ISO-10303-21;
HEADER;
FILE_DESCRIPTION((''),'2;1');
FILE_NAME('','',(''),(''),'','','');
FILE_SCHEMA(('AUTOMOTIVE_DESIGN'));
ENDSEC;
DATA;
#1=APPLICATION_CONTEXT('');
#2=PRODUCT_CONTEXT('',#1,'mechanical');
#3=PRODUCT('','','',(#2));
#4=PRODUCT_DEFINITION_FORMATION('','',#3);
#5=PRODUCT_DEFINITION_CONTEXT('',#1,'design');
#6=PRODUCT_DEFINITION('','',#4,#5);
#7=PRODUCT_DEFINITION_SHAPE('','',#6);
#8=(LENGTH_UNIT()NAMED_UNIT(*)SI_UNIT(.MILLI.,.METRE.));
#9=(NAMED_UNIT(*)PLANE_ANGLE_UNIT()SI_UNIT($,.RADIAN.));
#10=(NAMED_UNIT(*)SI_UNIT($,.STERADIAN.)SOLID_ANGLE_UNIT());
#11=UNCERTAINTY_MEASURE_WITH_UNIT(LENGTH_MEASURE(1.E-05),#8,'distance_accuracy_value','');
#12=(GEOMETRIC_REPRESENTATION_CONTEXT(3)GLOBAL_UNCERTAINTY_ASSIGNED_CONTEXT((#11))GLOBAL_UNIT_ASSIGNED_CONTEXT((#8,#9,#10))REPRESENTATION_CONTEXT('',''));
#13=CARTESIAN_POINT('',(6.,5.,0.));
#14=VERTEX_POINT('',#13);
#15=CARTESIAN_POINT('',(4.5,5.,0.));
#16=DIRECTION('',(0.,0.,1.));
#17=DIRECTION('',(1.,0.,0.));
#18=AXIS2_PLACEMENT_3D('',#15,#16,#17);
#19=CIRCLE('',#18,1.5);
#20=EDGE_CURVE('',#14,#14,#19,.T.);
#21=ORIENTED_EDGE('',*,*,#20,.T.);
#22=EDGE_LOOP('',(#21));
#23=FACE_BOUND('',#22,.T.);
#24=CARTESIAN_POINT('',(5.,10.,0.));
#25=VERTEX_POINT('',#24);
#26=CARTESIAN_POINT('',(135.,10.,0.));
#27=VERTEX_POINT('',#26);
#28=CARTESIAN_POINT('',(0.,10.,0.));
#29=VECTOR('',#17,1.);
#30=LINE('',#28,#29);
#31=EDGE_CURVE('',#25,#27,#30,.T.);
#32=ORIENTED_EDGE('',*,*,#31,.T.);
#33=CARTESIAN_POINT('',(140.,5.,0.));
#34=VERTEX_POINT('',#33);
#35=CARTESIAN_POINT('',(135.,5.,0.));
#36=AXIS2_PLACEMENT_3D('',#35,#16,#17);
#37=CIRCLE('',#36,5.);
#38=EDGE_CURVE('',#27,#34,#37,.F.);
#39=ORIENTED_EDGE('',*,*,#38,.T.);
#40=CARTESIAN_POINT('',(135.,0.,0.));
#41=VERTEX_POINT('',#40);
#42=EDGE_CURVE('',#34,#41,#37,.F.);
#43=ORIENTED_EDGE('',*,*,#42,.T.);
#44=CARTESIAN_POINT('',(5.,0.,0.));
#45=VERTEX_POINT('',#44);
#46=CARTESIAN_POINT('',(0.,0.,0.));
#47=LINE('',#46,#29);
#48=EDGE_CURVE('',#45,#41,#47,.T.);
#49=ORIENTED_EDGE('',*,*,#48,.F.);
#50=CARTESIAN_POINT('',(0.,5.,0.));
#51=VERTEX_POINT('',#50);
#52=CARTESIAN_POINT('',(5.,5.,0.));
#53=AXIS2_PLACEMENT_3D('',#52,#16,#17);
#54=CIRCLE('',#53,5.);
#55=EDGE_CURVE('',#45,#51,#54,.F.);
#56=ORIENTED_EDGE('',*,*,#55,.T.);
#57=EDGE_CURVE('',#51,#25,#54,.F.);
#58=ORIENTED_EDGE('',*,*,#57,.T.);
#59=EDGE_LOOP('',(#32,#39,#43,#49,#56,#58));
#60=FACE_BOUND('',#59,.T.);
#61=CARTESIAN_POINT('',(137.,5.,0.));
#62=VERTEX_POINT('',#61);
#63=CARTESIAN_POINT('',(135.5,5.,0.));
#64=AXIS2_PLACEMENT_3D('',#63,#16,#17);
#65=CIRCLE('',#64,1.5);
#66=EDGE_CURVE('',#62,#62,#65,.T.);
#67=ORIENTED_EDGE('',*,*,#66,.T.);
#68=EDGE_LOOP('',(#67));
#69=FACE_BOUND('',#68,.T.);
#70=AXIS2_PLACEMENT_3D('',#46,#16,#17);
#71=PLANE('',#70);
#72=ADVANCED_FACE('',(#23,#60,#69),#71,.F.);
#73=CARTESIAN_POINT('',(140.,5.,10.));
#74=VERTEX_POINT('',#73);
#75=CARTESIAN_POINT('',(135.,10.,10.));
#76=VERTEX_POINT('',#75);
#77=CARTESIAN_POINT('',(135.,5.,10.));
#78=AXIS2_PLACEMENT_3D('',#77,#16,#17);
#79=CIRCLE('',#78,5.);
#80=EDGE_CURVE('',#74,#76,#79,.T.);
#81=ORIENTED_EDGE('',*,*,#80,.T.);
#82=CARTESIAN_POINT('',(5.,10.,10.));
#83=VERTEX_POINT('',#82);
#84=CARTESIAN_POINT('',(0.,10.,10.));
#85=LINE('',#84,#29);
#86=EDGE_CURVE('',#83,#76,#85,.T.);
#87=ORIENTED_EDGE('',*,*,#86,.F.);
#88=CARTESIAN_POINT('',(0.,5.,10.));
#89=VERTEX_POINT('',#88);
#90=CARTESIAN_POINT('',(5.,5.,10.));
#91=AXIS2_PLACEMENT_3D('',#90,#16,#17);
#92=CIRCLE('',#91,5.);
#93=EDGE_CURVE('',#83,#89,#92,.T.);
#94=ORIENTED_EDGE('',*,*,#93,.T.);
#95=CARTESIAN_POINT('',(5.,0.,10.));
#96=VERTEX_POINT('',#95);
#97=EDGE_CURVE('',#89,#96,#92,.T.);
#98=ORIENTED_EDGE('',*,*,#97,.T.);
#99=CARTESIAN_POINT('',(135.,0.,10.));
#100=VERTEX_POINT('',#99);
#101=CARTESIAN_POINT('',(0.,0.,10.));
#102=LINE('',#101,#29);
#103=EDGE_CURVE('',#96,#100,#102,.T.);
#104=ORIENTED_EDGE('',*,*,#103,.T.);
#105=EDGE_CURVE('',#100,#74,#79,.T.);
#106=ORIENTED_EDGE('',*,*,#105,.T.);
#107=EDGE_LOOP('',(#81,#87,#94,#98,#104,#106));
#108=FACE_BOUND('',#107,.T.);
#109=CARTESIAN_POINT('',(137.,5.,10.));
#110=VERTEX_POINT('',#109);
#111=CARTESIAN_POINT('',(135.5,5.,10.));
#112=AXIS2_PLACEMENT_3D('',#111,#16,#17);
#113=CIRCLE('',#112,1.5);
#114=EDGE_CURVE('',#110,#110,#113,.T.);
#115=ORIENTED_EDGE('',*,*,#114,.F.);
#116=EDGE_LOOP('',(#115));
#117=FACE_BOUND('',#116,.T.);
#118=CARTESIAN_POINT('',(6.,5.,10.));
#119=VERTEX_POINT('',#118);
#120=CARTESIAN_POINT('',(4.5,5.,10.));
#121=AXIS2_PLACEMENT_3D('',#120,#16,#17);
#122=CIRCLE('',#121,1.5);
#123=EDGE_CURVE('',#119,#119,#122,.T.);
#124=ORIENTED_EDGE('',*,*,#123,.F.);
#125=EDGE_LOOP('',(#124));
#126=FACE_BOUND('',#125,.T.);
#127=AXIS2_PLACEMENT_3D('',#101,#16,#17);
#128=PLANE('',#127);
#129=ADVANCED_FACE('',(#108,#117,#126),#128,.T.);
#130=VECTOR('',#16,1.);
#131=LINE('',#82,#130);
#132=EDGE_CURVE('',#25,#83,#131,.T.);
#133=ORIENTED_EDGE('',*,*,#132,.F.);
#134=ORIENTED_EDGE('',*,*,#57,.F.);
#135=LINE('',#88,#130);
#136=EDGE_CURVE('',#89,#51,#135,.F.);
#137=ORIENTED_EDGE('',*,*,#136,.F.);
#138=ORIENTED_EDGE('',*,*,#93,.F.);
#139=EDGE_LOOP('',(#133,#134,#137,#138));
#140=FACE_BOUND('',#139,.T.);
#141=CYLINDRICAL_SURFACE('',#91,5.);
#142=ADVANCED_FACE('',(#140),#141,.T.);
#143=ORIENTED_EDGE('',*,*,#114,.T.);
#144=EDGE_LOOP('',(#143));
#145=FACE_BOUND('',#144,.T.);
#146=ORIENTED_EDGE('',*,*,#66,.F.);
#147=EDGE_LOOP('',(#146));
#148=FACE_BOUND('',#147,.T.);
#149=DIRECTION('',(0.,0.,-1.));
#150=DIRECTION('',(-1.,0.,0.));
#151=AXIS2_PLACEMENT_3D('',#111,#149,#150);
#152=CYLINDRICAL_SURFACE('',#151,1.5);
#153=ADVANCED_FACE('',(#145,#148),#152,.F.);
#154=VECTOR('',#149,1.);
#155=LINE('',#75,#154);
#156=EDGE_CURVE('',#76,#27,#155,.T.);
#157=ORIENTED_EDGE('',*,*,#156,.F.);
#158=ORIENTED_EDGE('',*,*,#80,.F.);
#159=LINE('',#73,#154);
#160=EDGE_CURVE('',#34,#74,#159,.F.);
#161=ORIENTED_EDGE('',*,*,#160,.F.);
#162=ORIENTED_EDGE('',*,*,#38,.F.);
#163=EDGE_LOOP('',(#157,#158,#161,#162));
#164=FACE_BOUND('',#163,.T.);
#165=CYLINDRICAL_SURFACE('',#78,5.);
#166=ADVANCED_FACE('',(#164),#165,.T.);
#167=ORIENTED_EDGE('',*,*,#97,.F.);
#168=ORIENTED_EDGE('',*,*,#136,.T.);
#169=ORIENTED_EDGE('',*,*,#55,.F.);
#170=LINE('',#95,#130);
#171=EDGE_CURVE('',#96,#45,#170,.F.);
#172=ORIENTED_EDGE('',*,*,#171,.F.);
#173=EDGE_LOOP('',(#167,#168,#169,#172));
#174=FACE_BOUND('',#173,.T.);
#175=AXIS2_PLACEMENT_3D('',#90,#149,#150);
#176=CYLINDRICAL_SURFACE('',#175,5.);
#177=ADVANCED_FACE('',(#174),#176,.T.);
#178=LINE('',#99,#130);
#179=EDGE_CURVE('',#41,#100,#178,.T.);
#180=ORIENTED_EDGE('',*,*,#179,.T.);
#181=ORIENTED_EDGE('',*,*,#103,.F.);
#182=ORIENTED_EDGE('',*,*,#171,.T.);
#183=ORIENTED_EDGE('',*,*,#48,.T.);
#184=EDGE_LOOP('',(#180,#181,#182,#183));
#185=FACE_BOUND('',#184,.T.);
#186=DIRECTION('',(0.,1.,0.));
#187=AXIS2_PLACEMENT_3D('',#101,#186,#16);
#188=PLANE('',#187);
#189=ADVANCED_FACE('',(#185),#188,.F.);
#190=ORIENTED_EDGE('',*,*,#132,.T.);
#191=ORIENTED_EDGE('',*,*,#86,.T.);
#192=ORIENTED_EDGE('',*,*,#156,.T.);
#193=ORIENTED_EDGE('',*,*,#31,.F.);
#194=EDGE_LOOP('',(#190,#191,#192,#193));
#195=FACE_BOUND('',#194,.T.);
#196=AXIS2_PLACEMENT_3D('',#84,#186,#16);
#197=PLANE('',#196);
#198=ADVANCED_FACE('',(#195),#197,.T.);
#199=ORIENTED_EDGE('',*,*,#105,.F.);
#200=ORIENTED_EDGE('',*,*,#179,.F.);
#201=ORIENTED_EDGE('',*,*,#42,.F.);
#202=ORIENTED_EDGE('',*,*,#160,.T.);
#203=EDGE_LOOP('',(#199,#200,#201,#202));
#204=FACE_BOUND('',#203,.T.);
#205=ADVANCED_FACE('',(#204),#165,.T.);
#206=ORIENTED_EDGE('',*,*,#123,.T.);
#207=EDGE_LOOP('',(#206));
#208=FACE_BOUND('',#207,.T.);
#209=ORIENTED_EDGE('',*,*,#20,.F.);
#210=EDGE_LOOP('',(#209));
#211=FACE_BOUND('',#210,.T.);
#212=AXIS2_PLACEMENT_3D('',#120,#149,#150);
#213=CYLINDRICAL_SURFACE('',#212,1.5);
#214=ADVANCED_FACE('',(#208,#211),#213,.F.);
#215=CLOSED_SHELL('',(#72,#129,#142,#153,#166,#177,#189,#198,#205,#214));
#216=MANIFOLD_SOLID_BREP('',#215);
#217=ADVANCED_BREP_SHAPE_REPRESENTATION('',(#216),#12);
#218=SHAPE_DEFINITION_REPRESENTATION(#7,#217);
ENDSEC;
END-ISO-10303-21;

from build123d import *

# Parameters (mm, degrees)
BOSS_EXTRUDE1_DEPTH = 10
FILLET1_R           = 5
FILLET2_R           = 5
FILLET3_R           = 5
FILLET4_R           = 5


with BuildPart() as part:
    # Sketch1 → Boss-Extrude1 (new body)
    with BuildSketch(Plane.XY):
        with BuildLine():
            Line((0, 10), (0, 5))
            Line((0, 5), (3, 5))
            ThreePointArc((3, 5), (4.5, 6.5), (6, 5))
            Line((6, 5), (134, 5))
            ThreePointArc((134, 5), (135.5, 6.5), (137, 5))
            Line((137, 5), (140, 5))
            Line((140, 5), (140, 10))
            Line((140, 10), (0, 10))
        make_face()
        with BuildLine():
            Line((3, 5), (0, 5))
            Line((0, 5), (0, 0))
            Line((0, 0), (140, 0))
            Line((140, 0), (140, 5))
            Line((140, 5), (137, 5))
            ThreePointArc((137, 5), (135.5, 3.5), (134, 5))
            Line((134, 5), (6, 5))
            ThreePointArc((6, 5), (4.5, 3.5), (3, 5))
        make_face()
    extrude(amount=BOSS_EXTRUDE1_DEPTH)

    # Fillet1
    fillet1_edges = [part.edges().sort_by_distance(p)[0] for p in [
        (0, 10, 5),
    ]]
    fillet(fillet1_edges, radius=FILLET1_R)

    # Fillet2
    fillet2_edges = [part.edges().sort_by_distance(p)[0] for p in [
        (0, 0, 5),
    ]]
    fillet(fillet2_edges, radius=FILLET2_R - 0.0001)  # a hair under: the kernel refuses the full size

    # Fillet3
    fillet3_edges = [part.edges().sort_by_distance(p)[0] for p in [
        (140, 10, 5),
    ]]
    fillet(fillet3_edges, radius=FILLET3_R)

    # Fillet4
    fillet4_edges = [part.edges().sort_by_distance(p)[0] for p in [
        (140, 0, 5),
    ]]
    fillet(fillet4_edges, radius=FILLET4_R - 0.0001)  # a hair under: the kernel refuses the full size


solid = part.part
